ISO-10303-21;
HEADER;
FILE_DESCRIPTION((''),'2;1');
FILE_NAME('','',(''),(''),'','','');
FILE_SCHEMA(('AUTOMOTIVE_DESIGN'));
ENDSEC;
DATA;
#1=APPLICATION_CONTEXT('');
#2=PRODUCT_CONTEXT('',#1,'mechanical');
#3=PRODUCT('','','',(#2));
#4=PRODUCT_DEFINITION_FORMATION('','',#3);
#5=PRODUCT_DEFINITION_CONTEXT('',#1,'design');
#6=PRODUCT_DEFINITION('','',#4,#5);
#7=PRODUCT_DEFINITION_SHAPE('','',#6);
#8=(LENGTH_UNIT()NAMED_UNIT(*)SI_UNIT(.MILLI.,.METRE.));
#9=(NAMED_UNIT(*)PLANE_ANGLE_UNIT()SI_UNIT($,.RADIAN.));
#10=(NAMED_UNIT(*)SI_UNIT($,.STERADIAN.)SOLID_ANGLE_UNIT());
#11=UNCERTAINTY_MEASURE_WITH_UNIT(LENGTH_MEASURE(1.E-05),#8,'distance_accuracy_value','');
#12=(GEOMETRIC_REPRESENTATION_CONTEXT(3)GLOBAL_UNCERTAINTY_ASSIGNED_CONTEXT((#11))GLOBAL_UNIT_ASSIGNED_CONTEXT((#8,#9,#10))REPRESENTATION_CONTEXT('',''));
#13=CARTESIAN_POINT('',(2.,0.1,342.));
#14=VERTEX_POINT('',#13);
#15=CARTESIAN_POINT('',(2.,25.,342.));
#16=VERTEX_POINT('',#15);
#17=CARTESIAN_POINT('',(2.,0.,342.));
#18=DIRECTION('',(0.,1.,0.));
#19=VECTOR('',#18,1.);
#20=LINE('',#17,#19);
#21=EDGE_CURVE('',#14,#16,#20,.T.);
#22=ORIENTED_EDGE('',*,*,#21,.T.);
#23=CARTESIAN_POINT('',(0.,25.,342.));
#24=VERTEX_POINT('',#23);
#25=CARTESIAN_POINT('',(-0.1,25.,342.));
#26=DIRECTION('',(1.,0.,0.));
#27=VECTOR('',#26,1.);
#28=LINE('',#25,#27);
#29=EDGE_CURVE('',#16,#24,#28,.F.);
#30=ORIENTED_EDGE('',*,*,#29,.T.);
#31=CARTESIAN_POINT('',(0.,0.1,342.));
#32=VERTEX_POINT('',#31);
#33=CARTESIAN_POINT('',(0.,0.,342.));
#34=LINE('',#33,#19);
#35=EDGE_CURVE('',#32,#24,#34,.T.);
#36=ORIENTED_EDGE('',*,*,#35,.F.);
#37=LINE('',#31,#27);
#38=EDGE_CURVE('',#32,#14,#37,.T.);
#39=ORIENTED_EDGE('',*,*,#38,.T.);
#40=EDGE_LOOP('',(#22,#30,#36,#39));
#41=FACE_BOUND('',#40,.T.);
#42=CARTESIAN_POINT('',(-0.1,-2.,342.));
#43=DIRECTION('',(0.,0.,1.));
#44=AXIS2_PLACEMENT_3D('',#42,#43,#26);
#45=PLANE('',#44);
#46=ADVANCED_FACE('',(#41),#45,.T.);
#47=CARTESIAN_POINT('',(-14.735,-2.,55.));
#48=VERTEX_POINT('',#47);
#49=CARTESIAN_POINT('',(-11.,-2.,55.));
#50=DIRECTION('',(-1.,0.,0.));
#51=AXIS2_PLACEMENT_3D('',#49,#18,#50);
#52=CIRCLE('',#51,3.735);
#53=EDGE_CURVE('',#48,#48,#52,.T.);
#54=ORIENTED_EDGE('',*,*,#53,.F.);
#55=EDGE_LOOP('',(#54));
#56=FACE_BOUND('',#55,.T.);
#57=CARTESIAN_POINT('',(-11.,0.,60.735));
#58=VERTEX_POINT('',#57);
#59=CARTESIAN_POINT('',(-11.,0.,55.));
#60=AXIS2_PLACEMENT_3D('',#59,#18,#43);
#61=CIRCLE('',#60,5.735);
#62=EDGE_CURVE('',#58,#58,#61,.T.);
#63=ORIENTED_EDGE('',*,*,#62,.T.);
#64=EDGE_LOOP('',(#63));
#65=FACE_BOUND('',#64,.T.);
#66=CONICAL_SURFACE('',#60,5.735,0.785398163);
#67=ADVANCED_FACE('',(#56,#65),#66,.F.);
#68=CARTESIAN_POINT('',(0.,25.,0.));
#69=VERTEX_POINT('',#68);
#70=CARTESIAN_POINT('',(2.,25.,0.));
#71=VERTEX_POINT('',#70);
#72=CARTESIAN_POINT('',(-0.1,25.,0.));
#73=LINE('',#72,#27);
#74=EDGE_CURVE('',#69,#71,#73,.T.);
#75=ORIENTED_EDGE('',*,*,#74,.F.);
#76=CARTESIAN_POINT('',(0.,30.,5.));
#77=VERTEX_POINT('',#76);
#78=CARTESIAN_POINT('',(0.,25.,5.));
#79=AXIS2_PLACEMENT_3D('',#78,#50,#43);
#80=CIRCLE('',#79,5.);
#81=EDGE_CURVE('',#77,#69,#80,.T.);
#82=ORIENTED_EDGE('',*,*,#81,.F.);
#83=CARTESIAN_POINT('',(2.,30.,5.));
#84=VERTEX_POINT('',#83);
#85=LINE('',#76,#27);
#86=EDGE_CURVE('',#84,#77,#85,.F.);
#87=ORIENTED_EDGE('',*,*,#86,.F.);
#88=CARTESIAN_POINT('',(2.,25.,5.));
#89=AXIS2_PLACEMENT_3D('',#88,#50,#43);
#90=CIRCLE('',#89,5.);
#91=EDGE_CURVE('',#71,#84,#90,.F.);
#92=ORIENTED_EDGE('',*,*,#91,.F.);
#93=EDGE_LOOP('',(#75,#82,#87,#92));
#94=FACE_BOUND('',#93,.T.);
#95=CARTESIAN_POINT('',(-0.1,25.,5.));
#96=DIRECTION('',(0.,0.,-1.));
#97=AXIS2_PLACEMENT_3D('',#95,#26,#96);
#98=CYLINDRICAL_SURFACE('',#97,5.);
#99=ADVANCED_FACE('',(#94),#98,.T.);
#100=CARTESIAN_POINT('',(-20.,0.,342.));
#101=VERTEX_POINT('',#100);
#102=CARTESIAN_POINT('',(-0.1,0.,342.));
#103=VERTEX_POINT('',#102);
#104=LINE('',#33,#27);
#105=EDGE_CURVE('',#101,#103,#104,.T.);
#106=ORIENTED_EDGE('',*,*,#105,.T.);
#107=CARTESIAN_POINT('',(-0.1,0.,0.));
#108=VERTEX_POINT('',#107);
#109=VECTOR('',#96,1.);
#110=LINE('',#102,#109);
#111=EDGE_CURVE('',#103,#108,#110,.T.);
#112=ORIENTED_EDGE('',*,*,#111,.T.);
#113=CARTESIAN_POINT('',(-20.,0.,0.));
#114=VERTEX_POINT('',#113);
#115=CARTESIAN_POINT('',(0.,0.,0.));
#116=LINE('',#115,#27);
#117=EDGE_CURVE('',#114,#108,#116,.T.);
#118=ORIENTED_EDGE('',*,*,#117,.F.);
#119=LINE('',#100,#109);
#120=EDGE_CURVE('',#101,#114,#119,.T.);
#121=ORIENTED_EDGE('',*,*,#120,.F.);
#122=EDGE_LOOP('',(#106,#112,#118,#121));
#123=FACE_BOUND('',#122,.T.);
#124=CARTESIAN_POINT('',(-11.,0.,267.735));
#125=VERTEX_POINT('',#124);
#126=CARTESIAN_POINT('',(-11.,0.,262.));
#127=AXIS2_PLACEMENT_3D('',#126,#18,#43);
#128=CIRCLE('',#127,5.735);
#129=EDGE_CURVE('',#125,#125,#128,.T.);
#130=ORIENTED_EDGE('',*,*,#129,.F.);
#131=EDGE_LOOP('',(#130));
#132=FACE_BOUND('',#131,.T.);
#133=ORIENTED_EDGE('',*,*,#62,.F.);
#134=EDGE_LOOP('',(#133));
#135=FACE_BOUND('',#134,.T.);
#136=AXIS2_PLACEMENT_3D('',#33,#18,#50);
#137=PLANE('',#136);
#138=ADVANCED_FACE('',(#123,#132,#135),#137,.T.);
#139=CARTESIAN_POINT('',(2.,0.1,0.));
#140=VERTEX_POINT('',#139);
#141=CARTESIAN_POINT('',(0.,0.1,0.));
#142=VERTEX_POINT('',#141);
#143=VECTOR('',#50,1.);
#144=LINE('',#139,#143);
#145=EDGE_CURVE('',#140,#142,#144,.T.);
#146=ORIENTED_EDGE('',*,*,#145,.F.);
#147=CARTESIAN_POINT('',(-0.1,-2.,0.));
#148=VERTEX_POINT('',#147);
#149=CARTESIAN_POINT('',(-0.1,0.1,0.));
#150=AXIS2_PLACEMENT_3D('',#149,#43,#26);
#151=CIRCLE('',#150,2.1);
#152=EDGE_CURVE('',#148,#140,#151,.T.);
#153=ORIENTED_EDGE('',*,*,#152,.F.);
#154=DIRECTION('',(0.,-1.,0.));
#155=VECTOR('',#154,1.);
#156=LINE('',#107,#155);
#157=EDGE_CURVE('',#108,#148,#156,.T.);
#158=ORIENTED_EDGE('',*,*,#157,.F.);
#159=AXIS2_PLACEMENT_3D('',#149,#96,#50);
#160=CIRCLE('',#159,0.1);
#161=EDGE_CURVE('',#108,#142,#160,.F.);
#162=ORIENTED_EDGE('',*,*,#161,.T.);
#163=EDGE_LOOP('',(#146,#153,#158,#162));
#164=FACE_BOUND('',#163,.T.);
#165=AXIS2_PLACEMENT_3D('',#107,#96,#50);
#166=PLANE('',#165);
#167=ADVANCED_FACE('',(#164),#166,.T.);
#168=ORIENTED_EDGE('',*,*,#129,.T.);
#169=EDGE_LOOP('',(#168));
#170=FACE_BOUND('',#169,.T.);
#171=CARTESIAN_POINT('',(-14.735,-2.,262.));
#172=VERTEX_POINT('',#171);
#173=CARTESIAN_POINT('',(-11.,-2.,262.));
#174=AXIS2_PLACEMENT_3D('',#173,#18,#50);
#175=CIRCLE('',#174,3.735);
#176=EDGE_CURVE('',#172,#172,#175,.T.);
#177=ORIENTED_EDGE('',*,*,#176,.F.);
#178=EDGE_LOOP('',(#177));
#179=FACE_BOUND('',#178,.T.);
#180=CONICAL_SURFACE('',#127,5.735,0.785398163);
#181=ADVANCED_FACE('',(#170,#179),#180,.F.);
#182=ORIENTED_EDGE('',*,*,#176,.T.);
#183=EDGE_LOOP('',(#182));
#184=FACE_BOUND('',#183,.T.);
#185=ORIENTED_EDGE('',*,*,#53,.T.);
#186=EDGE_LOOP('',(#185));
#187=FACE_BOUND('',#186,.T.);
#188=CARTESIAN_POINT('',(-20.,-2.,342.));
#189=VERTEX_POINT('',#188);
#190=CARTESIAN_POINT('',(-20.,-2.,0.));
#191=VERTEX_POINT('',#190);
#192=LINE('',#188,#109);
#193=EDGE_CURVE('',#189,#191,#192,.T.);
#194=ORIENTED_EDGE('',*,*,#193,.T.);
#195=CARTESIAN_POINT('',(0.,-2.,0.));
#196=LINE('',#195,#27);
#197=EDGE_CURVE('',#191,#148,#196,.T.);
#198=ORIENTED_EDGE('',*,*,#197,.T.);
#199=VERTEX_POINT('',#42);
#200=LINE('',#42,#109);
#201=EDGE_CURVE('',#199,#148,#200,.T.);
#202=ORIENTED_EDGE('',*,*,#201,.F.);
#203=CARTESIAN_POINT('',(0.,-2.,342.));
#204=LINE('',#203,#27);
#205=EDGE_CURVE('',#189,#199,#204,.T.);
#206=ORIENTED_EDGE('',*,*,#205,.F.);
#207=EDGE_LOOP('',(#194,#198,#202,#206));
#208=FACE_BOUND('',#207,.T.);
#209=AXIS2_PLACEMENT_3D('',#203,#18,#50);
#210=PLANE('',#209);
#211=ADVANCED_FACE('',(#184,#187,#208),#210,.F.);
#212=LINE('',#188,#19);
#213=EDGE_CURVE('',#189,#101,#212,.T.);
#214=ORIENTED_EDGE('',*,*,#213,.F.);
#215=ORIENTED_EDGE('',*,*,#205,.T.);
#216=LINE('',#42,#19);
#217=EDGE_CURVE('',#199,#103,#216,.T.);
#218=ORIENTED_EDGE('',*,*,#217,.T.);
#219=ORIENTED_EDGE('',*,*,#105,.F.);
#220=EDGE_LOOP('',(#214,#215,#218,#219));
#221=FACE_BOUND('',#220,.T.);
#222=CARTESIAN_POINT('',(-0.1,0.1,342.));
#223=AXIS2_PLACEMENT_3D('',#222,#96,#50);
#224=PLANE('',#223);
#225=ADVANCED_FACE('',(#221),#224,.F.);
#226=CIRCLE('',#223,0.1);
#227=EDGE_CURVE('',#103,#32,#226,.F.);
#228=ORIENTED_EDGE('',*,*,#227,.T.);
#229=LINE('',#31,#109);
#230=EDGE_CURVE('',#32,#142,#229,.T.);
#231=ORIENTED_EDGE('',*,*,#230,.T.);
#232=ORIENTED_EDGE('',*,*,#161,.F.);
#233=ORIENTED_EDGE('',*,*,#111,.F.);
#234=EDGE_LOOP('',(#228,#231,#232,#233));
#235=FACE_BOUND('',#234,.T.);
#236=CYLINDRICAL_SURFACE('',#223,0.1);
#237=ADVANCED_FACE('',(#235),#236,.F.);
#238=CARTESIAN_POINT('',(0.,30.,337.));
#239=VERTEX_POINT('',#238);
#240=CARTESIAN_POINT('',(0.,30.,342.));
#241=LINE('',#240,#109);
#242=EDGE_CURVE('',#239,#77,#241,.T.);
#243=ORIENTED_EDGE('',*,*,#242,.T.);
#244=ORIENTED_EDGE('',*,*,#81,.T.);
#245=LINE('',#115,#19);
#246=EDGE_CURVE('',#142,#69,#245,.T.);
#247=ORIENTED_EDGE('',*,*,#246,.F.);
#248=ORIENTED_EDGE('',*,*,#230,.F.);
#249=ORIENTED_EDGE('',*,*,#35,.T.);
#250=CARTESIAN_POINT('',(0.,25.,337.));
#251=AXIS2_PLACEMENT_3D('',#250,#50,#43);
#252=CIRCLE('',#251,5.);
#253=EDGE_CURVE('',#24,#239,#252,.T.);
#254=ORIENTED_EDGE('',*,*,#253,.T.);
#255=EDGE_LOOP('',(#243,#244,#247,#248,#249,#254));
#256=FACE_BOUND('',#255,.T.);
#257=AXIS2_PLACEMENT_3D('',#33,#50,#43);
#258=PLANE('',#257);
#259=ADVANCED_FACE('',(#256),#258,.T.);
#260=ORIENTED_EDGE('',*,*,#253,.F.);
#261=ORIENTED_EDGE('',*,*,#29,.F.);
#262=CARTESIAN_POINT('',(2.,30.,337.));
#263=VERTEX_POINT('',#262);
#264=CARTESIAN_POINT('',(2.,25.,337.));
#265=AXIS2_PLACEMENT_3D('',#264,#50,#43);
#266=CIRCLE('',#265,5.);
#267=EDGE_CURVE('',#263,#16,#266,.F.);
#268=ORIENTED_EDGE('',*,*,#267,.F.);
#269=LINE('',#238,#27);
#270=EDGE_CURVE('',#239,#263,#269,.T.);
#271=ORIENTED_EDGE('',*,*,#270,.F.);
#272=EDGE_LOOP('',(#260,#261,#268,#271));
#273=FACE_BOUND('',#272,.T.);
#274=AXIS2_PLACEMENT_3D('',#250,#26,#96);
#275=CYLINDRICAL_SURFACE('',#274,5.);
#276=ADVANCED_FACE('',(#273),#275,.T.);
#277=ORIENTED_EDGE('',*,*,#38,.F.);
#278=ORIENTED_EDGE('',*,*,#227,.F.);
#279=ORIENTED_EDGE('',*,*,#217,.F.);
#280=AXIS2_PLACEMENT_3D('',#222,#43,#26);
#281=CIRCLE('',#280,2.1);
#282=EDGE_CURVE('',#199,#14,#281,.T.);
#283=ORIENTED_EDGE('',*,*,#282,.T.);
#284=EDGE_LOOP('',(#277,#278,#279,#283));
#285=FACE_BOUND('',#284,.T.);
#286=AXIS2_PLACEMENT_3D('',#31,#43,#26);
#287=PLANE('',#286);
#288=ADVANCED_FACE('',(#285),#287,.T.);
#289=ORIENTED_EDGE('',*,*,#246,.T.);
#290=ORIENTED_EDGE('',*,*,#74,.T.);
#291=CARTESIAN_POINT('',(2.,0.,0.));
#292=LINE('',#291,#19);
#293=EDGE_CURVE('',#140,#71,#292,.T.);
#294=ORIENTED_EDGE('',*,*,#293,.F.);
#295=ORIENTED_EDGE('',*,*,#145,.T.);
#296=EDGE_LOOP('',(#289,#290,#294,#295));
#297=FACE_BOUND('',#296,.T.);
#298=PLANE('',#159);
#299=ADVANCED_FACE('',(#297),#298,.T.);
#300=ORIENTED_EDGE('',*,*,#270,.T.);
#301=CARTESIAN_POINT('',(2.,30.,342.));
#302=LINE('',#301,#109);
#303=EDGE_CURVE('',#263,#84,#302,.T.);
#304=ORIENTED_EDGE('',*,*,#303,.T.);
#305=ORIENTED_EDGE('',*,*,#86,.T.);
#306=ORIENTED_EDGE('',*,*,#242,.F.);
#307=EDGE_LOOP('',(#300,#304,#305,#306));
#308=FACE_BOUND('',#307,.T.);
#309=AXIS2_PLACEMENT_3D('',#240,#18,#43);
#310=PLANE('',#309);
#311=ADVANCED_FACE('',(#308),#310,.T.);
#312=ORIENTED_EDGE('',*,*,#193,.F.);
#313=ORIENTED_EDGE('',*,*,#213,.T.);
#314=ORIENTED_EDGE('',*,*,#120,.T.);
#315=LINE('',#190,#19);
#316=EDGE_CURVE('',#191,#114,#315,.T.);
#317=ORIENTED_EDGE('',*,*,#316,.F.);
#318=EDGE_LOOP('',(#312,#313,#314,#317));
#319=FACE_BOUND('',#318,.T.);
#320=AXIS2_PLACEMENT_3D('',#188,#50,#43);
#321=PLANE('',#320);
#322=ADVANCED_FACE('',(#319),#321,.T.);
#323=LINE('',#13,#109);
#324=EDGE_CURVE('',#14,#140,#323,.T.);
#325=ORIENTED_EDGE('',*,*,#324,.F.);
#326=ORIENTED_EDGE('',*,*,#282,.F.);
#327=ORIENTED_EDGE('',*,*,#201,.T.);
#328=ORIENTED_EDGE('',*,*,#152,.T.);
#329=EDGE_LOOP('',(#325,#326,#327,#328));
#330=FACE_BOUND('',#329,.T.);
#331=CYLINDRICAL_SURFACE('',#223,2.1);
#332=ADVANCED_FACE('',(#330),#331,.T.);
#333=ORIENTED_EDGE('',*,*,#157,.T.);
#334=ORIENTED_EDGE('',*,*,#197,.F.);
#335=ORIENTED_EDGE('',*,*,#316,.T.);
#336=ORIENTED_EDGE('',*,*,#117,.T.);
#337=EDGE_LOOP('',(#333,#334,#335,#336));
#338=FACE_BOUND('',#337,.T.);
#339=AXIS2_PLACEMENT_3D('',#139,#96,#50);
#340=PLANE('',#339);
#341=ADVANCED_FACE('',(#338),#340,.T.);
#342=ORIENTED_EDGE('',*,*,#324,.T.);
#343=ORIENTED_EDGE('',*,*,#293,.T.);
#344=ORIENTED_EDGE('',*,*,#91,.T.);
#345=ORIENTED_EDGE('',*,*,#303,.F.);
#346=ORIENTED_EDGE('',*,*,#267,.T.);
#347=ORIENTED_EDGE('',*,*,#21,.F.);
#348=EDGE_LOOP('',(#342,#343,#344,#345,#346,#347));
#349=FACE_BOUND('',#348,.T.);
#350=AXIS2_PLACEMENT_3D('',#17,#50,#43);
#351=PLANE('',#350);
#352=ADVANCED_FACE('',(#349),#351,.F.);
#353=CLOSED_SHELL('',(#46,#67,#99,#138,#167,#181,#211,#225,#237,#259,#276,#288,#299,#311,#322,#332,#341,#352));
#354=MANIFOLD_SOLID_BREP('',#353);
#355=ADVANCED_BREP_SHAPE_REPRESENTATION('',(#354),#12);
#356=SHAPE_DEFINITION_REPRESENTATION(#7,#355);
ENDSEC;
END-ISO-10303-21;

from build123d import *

# Parameters (mm, degrees)
BASIS_BLECH1_DEPTH                          = 342
VERRUNDUNG1_R                               = 5
FORMSENKUNG_F_R_M5_SENKSCHRAUBE_MIT_2_COUNT = 2
FORMSENKUNG_F_R_M5_SENKSCHRAUBE_MIT_2_PITCH = 207


# Sheet-metal steps are written as plain solids
with BuildPart() as part:
    # Skizze1 → Basis-Blech1 (new body)
    with BuildSketch(Plane.XY):
        with BuildLine():
            Line((0, 30), (0, 0.1))
            ThreePointArc((0, 0.1), (-0.029289322, 0.029289322), (-0.1, 0))
            Line((-0.1, 0), (-20, 0))
            Line((-20, 0), (-20, -2))
            Line((-20, -2), (-0.1, -2))
            ThreePointArc((-0.1, -2), (1.38492424, -1.38492424), (2, 0.1))
            Line((2, 0.1), (2, 30))
            Line((2, 30), (0, 30))
        make_face()
    extrude(amount=BASIS_BLECH1_DEPTH)

    # Verrundung1
    verrundung1_edges = [part.edges().sort_by_distance(p)[0] for p in [
        (1, 30, 342),
        (1, 30, 0),
    ]]
    fillet(verrundung1_edges, radius=VERRUNDUNG1_R)

    # Skizze2 → Formsenkung für M5 Senkschraube mit Innensechskant1 (revolve, cut)
    with BuildSketch(Plane(origin=(-11, 0, 55), x_dir=(0, 0, 1), z_dir=(1, 0, 0))):
        Polygon((0, 0), (0, 2), (2.75, 2), (2.75, 2.985), (5.735, 0), align=None)
    formsenkung_f_r_m5_senkschraube_mit_inne = revolve(axis=Axis((-11, 6.35, 55), (0, -1, 0)), mode=Mode.SUBTRACT)

    # Formsenkung f_r M5 Senkschraube mit  2: Formsenkung für M5 Senkschraube mit Innensechskant1 ×2
    with Locations(*[(0, 0, i * FORMSENKUNG_F_R_M5_SENKSCHRAUBE_MIT_2_PITCH) for i in range(1, FORMSENKUNG_F_R_M5_SENKSCHRAUBE_MIT_2_COUNT)]):
        add(formsenkung_f_r_m5_senkschraube_mit_inne, mode=Mode.SUBTRACT)


solid = part.part
